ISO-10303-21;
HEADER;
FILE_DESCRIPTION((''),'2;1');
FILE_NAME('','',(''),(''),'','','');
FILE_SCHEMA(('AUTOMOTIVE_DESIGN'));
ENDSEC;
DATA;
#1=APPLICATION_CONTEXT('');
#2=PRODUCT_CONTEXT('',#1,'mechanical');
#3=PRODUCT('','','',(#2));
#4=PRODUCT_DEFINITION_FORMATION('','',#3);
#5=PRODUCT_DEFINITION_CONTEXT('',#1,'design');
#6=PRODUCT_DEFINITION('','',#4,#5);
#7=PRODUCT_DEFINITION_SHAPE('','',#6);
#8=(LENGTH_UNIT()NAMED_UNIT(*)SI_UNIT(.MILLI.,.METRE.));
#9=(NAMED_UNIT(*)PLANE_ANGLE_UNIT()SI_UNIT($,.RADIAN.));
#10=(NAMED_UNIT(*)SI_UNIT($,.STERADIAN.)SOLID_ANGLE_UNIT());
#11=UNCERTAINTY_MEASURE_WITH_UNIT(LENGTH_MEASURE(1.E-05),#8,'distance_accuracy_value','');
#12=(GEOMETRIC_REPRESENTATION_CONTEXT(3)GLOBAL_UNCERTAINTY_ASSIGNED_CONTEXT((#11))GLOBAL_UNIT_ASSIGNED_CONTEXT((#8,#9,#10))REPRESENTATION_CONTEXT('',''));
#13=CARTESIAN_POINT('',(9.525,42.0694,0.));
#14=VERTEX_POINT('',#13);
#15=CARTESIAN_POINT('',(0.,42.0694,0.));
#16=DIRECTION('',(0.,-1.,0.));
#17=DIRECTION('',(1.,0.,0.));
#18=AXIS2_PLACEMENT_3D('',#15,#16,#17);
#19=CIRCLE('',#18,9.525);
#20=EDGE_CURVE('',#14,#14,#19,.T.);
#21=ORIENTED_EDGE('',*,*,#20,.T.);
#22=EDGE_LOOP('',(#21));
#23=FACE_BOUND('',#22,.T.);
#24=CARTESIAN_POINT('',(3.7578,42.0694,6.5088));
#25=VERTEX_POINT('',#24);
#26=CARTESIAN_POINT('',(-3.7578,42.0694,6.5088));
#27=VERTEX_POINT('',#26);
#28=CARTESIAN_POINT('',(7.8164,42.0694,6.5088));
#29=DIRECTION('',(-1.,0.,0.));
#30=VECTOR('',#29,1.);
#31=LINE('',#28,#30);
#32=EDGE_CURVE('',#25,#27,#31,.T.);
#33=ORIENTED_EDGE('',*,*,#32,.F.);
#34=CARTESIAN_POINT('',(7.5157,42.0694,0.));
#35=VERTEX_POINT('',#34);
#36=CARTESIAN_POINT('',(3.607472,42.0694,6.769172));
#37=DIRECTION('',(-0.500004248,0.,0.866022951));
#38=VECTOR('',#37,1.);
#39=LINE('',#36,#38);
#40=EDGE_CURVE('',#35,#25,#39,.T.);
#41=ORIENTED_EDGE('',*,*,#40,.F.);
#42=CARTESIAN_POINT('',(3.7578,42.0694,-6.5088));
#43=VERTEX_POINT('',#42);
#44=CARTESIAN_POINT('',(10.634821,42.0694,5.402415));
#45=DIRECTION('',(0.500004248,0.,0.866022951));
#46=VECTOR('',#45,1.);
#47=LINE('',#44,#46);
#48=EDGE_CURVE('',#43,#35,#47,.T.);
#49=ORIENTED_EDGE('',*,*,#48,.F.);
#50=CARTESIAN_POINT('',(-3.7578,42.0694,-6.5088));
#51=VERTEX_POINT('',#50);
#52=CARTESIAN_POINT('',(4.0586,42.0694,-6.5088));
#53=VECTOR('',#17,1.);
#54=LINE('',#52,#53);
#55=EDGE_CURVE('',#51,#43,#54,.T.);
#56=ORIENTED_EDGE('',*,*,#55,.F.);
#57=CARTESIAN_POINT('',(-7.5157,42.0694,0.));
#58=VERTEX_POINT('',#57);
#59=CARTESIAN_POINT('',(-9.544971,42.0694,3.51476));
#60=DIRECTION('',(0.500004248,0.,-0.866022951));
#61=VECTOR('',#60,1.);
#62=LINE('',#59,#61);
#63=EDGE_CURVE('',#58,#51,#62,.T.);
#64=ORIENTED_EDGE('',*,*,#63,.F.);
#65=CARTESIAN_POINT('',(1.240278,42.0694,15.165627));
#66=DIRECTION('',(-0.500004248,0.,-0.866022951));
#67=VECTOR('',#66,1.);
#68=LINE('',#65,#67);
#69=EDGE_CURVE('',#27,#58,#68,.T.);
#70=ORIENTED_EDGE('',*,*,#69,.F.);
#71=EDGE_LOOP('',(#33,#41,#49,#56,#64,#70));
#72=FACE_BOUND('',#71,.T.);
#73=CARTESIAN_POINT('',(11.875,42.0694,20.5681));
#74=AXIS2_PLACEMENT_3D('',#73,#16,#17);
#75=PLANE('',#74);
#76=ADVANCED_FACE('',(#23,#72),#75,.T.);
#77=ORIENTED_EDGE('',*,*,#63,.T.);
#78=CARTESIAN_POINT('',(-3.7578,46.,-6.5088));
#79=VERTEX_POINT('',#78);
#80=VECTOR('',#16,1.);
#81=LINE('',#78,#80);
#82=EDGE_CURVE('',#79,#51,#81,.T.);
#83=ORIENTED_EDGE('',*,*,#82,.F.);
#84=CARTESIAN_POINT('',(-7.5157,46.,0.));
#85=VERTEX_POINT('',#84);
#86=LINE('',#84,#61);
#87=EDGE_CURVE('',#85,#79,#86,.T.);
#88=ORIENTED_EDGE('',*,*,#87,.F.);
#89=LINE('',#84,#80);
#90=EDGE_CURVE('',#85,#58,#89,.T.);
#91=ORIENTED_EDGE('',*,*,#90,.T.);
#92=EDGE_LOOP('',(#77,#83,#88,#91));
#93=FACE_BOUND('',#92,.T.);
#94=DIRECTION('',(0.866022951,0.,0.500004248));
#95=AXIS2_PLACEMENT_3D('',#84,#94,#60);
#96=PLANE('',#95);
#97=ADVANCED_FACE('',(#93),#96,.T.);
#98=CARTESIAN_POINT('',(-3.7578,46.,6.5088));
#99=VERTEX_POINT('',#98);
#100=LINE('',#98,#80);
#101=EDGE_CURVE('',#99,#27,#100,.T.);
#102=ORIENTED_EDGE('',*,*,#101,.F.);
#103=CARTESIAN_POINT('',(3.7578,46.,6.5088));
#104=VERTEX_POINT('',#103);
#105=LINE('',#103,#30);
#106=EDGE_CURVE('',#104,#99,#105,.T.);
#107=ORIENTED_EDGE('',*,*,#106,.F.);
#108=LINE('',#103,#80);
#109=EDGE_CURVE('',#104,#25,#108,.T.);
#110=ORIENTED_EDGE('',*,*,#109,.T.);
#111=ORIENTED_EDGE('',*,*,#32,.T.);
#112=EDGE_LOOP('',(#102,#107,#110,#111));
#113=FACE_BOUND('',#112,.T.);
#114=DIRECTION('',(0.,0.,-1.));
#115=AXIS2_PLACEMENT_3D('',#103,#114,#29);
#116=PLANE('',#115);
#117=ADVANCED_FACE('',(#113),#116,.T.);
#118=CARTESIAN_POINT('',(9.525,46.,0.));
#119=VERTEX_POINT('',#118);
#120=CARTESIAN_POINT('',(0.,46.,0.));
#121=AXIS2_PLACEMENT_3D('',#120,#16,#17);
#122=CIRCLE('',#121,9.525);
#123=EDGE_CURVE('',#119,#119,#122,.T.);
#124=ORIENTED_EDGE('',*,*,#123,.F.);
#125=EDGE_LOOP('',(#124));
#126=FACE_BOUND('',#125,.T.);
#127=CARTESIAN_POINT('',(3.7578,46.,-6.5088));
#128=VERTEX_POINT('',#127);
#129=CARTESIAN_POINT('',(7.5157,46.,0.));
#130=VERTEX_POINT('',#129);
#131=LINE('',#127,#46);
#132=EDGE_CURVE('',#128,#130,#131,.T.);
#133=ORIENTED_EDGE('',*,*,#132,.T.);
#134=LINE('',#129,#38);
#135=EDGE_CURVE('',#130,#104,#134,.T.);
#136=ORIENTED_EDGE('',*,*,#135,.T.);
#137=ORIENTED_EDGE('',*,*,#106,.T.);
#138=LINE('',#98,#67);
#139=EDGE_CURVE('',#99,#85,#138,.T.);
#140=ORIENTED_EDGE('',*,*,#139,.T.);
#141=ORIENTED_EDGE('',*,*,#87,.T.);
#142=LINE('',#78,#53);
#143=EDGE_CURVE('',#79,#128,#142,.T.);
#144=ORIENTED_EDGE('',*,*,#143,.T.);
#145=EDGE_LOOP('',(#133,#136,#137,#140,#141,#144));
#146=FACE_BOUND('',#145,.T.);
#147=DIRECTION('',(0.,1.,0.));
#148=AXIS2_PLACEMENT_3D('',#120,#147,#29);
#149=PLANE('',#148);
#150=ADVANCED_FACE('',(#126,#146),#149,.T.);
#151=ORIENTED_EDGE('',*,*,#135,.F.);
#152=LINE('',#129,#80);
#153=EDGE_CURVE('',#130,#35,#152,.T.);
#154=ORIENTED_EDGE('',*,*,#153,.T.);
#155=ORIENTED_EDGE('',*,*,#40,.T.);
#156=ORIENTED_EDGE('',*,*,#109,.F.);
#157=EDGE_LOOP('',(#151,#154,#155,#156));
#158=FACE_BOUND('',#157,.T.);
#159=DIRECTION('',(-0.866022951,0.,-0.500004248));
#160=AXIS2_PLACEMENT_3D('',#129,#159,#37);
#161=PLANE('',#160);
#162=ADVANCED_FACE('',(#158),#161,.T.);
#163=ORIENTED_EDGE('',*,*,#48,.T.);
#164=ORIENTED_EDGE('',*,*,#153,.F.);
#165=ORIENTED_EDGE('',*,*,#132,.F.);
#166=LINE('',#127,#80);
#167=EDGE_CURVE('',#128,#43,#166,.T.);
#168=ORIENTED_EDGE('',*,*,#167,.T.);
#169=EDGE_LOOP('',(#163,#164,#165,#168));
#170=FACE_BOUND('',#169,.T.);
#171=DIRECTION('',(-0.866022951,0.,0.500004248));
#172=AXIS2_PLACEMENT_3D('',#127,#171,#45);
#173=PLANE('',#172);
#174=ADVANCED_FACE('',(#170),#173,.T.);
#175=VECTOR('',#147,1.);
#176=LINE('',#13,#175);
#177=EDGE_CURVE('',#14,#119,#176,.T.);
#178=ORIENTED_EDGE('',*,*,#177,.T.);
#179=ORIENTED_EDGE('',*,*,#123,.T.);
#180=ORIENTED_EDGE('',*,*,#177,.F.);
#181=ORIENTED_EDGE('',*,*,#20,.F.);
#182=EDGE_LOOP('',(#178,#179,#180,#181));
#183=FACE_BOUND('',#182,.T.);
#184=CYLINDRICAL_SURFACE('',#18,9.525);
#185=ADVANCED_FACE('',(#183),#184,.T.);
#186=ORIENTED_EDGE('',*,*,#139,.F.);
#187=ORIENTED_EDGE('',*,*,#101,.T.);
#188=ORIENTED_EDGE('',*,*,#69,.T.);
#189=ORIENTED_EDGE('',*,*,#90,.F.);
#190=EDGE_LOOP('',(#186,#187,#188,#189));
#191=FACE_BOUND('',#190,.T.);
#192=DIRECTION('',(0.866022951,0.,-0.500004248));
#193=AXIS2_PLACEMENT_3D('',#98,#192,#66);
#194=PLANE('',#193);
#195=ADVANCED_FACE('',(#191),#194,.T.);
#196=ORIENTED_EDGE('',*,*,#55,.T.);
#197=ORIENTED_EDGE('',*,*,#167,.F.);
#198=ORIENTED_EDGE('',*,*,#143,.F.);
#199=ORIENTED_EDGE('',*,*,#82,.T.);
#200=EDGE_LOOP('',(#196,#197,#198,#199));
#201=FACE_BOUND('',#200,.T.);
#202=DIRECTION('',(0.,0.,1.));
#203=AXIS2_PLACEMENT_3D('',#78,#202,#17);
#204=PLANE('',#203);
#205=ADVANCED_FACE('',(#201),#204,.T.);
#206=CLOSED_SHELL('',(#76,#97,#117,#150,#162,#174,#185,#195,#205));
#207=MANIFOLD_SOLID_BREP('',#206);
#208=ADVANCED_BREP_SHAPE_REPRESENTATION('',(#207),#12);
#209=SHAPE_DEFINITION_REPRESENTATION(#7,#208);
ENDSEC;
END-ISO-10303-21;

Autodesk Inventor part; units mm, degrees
ref_plane "YZ Plane" through (0, 0, 0) normal (1, 0, 0) x (0, 1, 0)
ref_plane "XZ Plane" through (0, 0, 0) normal (0, 1, 0) x (-1, 0, 0)
ref_plane "XY Plane" through (0, 0, 0) normal (0, 0, 1) x (1, 0, 0)
sketch "Sketch1" plane through (0, 0, 0) normal (0, 1, 0) x (-1, 0, 0)
  circle A0 centre (0, 0) radius 28.5
  circle A1 centre (0, 0) radius 9
  circle A2 centre (11.875, 20.5681) radius 1.5875
  circle A3 centre (-11.875, 20.5681) radius 1.5875
  circle A4 centre (23.75, 0) radius 1.5875
  circle A5 centre (11.875, -20.5681) radius 1.5875
  circle A6 centre (-11.875, -20.5681) radius 1.5875
  circle A7 centre (-23.75, 0) radius 1.5875
  dimension "d5" = 3.175
  dimension "d6" = 20.5681
  dimension "d7" = 3.175
  dimension "d8" = 3.175
  dimension "d9" = 3.175
  dimension "d10" = 3.175
  dimension "d11" = 3.175
extrude "Extrusion1" add sketch "Sketch1" along normal blind 46
sketch "Sketch2" plane through (0, 46, 0) normal (0, 1, 0) x (1, 0, 0)
  line L0 (7.5157, 0) -> (3.7578, -6.5088)
  line L1 (3.7578, -6.5088) -> (-3.7578, -6.5088)
  line L2 (-3.7578, -6.5088) -> (-7.5157, 0)
  line L3 (-7.5157, 0) -> (-3.7578, 6.5088)
  line L4 (-3.7578, 6.5088) -> (3.7578, 6.5088)
  line L5 (3.7578, 6.5088) -> (7.5157, 0)
  circle A0 centre (0, 0) radius 28.5 projected
  circle A1 centre (-11.875, -20.5681) radius 1.5875 projected
  circle A2 centre (11.875, -20.5681) radius 1.5875 projected
  circle A3 centre (-23.75, 0) radius 1.5875 projected
  circle A4 centre (-11.875, 20.5681) radius 1.5875 projected
  circle A5 centre (23.75, 0) radius 1.5875 projected
  circle A6 centre (11.875, 20.5681) radius 1.5875 projected
  dimension "d4" = 13.0175
extrude "Extrusion2" add sketch "Sketch2" against normal blind 46
sketch "Sketch3" plane through (0, 46, 0) normal (0, 1, 0) x (1, 0, 0)
  circle A0 centre (-11.875, 20.5681) radius 1.5875 projected
  circle A1 centre (-11.875, 20.5681) radius 2.3812
  circle A2 centre (11.875, 20.5681) radius 1.5875 projected
  circle A3 centre (11.875, 20.5681) radius 2.3812
  circle A4 centre (23.75, 0) radius 1.5875 projected
  circle A5 centre (23.75, 0) radius 2.3813
  circle A6 centre (11.875, -20.5681) radius 1.5875 projected
  circle A7 centre (11.875, -20.5681) radius 2.3813
  circle A8 centre (-11.875, -20.5681) radius 1.5875 projected
  circle A9 centre (-11.875, -20.5681) radius 2.3812
  circle A10 centre (-23.75, 0) radius 1.5875 projected
  circle A11 centre (-23.75, 0) radius 2.3812
  point P0 (0, 0)
  dimension "d12" = 4.7625
  dimension "d13" = 4.7625
  dimension "d14" = 4.7625
  dimension "d15" = 4.7625
  dimension "d16" = 4.7625
  dimension "d17" = 4.7625
extrude "Extrusion3" add sketch "Sketch3" along normal blind 2.3813 and the other way blind 48.3807 contours A0 | A1 | A2 | A3 | A4 | A5 | A6 | A7 | A8 | A9 | A10 | A11
sketch "Sketch4" plane through (11.875, -2.3806, 20.5681) normal (0, -1, 0) x (1, 0, 0)
  circle A0 centre (-11.875, -20.5681) radius 42.5802
extrude "Extrusion4" cut sketch "Sketch4" against normal blind 44.45
sketch "Sketch5" plane through (0, 42.0694, 0) normal (0, -1, 0) x (1, 0, 0)
  circle A0 centre (0, 0) radius 9.525
  circle A1 centre (0, 0) radius 31.269
  dimension "d24" = 19.05
extrude "Extrusion5" cut sketch "Sketch5" against normal blind 25.4
equation "\"d7\" = d5"
equation "\"d8\" = d5"
equation "\"d9\" = d5"
equation "\"d10\" = d5"
equation "\"d11\" = d5"
properties part number "new mech inside test"
